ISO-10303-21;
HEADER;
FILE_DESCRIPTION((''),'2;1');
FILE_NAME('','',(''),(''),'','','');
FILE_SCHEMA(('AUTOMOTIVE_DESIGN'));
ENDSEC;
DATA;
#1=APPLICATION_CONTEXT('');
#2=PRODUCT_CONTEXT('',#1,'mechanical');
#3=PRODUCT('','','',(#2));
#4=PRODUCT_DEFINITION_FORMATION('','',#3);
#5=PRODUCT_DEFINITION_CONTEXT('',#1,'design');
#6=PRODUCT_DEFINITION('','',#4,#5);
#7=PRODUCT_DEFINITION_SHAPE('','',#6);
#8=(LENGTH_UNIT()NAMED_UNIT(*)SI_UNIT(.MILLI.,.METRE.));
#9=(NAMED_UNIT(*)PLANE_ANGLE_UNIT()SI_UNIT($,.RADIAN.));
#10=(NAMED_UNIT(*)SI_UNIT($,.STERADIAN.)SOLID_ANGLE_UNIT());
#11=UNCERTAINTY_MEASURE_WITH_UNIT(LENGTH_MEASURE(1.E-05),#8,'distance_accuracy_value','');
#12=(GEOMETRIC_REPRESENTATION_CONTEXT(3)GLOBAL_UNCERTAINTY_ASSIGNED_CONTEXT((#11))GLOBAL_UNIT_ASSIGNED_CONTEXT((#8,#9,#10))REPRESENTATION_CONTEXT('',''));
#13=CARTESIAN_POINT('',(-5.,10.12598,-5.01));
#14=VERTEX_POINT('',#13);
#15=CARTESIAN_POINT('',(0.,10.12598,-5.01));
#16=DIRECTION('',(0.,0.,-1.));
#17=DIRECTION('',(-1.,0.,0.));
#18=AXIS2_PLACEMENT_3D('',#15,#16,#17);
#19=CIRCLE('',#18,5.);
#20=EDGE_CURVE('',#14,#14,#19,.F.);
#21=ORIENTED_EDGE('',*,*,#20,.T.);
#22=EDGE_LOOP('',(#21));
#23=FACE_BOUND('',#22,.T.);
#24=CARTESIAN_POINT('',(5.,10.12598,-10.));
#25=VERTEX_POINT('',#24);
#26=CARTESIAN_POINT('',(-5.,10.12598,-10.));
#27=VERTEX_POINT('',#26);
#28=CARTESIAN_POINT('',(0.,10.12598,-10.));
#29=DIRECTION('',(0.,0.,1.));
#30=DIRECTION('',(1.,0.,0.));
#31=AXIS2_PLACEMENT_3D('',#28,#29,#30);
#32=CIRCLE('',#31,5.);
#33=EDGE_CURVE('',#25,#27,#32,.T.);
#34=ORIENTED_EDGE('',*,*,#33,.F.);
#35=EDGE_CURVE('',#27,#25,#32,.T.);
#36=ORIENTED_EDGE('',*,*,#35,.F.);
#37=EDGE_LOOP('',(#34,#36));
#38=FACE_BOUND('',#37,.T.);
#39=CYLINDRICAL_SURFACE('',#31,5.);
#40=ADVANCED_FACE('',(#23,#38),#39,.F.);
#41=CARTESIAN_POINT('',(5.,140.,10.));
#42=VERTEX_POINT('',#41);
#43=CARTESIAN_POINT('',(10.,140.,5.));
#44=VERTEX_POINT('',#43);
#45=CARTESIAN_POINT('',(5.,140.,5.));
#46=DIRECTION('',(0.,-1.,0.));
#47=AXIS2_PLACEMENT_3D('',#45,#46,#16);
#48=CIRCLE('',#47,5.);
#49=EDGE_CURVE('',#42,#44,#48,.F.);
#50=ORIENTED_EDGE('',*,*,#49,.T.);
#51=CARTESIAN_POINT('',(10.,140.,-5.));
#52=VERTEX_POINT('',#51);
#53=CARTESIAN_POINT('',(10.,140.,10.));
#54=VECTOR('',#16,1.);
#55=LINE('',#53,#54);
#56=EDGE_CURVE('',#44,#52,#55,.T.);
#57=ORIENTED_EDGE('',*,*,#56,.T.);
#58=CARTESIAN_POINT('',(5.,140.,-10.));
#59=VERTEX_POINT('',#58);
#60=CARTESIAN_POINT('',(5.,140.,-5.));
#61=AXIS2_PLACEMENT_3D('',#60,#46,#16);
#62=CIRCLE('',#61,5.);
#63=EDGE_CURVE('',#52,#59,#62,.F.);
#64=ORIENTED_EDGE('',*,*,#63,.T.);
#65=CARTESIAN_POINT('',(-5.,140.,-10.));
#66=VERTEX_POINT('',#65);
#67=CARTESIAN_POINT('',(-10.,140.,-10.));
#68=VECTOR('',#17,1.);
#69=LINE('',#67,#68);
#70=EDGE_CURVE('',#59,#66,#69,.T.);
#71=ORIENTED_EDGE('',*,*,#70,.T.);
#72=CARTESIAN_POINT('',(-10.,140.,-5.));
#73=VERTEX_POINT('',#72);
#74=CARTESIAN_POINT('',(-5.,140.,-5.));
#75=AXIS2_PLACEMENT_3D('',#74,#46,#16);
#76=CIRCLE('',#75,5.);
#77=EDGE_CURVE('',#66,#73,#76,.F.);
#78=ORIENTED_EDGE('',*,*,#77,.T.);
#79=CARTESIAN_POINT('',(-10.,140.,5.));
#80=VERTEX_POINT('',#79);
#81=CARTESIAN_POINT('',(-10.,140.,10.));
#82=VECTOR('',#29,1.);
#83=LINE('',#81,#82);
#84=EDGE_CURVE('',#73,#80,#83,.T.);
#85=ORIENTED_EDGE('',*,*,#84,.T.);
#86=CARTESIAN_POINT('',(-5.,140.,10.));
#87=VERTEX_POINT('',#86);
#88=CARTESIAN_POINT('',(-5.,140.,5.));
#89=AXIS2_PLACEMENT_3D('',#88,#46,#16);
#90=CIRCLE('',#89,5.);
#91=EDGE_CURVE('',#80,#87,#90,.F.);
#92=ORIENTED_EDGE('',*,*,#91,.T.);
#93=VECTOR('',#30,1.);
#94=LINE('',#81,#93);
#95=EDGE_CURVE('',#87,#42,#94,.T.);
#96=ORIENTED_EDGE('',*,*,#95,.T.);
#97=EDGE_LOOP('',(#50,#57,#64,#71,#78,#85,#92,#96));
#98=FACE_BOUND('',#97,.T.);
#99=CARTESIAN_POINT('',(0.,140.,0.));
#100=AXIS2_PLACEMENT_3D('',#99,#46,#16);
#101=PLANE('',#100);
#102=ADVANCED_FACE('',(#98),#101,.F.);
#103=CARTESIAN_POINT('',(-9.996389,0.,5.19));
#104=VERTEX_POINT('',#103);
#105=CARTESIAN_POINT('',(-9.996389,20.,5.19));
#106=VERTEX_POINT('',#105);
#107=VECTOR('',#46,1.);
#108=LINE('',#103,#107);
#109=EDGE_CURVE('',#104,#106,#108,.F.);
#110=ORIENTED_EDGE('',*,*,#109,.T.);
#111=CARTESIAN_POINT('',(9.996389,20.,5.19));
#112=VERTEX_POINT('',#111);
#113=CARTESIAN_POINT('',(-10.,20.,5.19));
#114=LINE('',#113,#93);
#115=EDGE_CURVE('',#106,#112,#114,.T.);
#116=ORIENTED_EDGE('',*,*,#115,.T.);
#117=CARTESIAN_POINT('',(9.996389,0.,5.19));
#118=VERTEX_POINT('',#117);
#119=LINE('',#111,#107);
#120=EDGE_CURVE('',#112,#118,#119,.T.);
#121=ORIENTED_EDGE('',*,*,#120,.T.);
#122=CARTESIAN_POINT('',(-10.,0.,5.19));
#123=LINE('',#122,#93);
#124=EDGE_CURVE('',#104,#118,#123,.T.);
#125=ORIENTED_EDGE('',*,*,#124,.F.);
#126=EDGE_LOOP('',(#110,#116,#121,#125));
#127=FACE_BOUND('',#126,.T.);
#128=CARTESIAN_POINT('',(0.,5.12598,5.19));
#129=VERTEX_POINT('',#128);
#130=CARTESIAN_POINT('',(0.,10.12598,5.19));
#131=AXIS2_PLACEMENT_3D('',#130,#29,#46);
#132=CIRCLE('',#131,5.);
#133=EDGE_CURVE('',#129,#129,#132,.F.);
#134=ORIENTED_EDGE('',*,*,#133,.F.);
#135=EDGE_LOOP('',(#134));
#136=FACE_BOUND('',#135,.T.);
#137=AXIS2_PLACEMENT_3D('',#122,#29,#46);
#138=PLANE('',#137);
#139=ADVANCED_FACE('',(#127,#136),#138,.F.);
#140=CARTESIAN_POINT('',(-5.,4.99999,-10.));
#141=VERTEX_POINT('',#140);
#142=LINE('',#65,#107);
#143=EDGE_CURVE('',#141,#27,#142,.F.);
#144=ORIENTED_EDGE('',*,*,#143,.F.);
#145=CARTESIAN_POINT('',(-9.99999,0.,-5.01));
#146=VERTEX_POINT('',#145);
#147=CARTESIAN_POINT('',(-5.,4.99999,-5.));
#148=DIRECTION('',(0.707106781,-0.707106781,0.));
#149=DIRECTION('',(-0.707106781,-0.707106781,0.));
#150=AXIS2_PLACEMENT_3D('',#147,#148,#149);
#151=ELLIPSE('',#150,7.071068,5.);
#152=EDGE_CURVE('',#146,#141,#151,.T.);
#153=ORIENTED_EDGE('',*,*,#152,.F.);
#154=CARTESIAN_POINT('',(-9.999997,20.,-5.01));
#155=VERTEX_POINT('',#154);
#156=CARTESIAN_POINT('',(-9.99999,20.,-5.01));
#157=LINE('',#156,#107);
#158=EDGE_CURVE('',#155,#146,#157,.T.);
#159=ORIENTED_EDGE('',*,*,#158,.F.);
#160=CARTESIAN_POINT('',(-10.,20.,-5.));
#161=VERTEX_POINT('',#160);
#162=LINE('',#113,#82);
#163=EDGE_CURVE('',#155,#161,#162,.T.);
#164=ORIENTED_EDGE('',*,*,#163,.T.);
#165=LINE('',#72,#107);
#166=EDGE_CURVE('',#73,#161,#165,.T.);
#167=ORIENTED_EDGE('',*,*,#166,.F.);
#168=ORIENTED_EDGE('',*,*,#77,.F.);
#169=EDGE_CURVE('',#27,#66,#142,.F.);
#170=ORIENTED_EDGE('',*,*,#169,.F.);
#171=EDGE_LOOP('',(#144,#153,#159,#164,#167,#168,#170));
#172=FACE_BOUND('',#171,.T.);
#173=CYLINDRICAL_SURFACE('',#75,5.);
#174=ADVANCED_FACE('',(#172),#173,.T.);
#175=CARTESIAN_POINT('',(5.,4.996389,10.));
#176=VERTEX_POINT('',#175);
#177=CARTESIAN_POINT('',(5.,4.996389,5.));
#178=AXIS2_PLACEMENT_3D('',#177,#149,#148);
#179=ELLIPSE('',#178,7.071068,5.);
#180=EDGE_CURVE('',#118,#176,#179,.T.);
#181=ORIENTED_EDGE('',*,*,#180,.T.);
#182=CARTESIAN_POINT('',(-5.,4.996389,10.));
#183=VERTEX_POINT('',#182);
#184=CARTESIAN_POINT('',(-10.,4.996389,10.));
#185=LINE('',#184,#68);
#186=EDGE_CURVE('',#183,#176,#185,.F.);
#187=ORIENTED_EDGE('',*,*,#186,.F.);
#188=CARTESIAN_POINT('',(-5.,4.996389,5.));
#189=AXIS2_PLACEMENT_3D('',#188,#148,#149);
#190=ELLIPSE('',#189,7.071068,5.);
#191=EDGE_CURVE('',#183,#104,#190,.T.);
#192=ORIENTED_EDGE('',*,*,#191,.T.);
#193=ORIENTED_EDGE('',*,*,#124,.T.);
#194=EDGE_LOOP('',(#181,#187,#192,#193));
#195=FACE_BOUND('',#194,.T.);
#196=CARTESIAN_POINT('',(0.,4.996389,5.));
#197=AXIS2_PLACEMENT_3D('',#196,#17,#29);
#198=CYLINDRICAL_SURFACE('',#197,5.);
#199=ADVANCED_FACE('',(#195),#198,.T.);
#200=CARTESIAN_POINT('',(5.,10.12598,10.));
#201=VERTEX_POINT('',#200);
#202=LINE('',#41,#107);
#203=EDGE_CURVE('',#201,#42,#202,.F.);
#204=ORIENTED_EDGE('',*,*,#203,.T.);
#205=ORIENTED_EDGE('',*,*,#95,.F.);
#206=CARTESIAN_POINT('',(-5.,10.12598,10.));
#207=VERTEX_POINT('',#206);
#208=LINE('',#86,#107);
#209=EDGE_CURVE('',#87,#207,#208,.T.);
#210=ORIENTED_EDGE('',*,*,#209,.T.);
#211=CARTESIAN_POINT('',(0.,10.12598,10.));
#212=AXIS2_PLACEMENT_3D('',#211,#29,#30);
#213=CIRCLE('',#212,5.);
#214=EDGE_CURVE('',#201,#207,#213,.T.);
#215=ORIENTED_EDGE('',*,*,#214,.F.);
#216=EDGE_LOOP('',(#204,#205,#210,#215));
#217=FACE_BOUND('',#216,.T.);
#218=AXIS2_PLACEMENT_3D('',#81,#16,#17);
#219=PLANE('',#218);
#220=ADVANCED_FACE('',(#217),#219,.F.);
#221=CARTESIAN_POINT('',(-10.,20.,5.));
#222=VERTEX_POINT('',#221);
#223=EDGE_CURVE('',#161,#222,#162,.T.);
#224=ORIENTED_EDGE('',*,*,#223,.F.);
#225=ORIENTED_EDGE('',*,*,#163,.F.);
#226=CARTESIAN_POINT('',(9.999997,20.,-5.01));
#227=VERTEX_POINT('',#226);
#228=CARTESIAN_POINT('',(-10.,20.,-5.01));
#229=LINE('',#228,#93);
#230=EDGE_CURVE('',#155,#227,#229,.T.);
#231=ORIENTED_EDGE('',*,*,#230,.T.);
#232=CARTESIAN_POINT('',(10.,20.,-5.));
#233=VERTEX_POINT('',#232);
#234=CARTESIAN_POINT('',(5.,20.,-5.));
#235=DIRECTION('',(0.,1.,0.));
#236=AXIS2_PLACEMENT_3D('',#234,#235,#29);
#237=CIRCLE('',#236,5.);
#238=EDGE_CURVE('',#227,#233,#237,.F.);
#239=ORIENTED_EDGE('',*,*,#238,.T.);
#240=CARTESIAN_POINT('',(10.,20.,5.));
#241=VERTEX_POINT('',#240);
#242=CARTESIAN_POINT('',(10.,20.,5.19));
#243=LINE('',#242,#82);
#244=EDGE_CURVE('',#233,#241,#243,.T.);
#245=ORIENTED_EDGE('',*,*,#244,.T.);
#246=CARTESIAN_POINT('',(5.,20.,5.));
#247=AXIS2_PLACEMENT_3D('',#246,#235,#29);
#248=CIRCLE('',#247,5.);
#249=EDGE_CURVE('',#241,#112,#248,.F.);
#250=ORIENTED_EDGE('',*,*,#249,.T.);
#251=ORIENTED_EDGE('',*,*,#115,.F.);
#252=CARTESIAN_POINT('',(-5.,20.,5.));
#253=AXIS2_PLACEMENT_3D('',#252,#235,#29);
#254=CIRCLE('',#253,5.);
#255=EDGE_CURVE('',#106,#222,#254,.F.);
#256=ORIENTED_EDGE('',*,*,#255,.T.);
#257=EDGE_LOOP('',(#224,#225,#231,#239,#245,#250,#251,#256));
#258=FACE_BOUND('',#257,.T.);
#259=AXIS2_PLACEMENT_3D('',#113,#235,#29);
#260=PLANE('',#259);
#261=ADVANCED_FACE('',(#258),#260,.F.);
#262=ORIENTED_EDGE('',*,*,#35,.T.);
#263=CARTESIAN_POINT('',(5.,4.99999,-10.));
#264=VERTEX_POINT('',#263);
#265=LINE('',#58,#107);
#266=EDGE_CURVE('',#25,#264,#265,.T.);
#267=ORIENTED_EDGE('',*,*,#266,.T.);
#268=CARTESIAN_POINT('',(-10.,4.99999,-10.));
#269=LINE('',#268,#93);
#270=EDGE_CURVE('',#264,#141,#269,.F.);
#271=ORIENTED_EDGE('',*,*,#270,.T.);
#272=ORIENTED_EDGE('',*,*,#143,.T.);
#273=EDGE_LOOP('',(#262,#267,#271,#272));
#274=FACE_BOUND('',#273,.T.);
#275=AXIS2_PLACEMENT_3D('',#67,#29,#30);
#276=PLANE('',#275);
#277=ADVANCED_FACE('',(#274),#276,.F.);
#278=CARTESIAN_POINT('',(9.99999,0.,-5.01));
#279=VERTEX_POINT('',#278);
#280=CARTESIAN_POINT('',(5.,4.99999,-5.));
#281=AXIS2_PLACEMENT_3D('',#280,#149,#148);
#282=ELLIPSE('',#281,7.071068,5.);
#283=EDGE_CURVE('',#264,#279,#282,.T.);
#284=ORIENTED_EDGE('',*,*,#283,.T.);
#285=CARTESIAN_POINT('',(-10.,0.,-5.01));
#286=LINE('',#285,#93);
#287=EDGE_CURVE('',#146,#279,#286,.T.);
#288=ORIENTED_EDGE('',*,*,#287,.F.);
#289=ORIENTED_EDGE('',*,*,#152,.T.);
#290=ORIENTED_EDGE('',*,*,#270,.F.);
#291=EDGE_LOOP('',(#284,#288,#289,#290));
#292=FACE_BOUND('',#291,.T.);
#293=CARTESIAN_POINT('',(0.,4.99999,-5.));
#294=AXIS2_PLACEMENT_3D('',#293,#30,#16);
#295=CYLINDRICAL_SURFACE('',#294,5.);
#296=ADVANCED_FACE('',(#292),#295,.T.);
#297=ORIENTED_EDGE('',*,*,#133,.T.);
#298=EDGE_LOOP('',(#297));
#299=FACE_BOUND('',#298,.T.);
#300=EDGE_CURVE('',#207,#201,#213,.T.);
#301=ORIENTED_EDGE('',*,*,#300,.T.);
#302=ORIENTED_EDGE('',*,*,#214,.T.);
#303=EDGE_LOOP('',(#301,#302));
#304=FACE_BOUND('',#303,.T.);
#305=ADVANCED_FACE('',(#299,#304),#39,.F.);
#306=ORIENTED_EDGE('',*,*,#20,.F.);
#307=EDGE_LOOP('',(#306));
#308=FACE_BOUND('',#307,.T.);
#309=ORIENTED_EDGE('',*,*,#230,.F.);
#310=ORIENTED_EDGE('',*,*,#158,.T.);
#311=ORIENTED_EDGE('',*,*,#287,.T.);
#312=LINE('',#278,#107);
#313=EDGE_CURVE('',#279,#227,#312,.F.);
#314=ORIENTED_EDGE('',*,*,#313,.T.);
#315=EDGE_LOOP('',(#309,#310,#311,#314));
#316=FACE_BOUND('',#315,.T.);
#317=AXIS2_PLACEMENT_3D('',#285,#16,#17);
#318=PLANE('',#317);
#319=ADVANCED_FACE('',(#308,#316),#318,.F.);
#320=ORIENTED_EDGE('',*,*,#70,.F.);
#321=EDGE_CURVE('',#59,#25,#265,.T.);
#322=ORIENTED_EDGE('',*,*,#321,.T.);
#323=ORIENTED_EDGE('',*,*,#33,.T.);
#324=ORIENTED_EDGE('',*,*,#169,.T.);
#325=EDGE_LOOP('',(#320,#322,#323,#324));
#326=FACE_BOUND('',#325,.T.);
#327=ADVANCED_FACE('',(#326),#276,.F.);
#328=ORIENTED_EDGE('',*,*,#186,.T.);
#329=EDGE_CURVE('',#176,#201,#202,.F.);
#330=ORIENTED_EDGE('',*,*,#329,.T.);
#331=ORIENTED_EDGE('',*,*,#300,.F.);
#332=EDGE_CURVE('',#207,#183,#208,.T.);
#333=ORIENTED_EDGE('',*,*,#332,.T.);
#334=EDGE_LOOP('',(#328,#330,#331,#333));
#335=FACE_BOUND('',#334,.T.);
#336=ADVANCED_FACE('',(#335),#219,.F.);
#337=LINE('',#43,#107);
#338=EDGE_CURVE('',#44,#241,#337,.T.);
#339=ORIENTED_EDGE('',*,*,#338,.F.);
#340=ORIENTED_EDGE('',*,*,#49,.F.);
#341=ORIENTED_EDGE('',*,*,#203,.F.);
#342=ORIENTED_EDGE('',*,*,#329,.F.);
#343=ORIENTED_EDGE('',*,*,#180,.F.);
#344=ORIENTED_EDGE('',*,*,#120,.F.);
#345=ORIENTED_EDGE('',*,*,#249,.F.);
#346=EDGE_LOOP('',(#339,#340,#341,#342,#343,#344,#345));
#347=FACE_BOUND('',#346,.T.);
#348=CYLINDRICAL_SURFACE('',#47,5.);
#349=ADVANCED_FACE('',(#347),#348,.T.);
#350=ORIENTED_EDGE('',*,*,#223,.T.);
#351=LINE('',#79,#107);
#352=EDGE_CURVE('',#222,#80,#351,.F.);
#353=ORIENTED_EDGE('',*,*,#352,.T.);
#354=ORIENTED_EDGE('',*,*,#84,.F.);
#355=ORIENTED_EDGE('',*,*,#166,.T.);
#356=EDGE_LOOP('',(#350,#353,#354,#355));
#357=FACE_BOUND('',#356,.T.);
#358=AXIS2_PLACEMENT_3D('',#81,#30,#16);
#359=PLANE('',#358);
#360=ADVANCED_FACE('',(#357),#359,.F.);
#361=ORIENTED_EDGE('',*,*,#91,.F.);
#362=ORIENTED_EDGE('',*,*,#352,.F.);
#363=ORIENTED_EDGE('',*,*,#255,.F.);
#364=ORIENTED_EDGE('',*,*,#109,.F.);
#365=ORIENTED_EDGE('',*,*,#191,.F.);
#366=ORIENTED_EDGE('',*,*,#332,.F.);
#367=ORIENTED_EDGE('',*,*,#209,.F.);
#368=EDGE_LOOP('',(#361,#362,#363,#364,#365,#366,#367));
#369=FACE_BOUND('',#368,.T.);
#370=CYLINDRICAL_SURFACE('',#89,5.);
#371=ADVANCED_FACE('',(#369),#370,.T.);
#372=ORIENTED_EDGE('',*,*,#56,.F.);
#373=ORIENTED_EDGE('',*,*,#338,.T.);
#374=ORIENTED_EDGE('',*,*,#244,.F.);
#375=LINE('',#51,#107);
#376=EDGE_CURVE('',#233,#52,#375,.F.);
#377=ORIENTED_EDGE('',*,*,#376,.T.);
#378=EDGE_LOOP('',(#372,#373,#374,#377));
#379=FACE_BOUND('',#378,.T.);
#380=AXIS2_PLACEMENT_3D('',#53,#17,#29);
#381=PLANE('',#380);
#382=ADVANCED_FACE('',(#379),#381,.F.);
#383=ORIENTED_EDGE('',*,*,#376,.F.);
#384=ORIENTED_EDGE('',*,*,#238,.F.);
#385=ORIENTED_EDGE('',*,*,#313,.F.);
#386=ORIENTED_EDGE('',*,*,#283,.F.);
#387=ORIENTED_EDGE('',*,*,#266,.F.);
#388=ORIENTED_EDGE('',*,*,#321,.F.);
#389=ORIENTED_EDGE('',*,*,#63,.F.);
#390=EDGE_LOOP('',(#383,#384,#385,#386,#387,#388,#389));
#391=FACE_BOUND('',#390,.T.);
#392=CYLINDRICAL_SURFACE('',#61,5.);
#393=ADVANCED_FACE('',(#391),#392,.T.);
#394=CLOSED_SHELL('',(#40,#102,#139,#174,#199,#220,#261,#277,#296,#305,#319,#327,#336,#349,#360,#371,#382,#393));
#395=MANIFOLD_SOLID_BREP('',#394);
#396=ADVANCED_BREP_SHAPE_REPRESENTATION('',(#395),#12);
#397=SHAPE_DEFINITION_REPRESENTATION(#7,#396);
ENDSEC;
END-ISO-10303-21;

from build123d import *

# Parameters (mm, degrees)
SKETCH1_W           = 20
SKETCH1_H           = 20
BOSS_EXTRUDE1_DEPTH = 140
SKETCH2_R           = 5
CUT_EXTRUDE1_DEPTH  = 142.774468788
SKETCH3_W           = 10.2
SKETCH3_H           = 20
CUT_EXTRUDE2_DEPTH  = 142.774468788
FILLET1_R           = 5


with BuildPart() as part:
    # Sketch1 → Boss-Extrude1 (new body)
    with BuildSketch(Plane(origin=(0, 0, 0), x_dir=(1, 0, 0), z_dir=(0, 1, 0))):
        Rectangle(SKETCH1_W, SKETCH1_H)
    extrude(amount=BOSS_EXTRUDE1_DEPTH)

    # Sketch2 → Cut-Extrude1 (cut, through all)
    with BuildSketch(Plane.XY.offset(10)):
        with Locations((0, 10.125979961)):
            Circle(SKETCH2_R)
    extrude(amount=-CUT_EXTRUDE1_DEPTH, mode=Mode.SUBTRACT)

    # Sketch3 → Cut-Extrude2 (cut, through all)
    with BuildSketch(Plane(origin=(10, 0, 0), x_dir=(0, 0, -1), z_dir=(1, 0, 0))):
        with Locations((-0.09, 10)):
            Rectangle(SKETCH3_W, SKETCH3_H)
    extrude(amount=-CUT_EXTRUDE2_DEPTH, mode=Mode.SUBTRACT)

    # Fillet1
    # the kernel refuses this fillet: 5 mm, written as the material it takes off along each edge
    with BuildSketch(Plane(origin=(22.5, 0, -10), x_dir=(0, 0, 1), z_dir=(-1, 0, 0))) as fillet1_piece_1:
        with BuildLine():
            CenterArc((FILLET1_R, FILLET1_R), FILLET1_R, 180, 90)
            Line((0, FILLET1_R), (0, 0))
            Line((0, 0), (FILLET1_R, 0))
        make_face()
    extrude(amount=45, mode=Mode.SUBTRACT)
    with BuildSketch(Plane(origin=(-22.49097174, 0, 10), x_dir=(0, 1, 0), z_dir=(1, 0, 0))) as fillet1_piece_2:
        with BuildLine():
            CenterArc((4.996388696, -5), FILLET1_R, 90, 87.822236049)
            Line((0, -4.81), (0, 0))
            Line((0, 0), (4.996388696, 0))
        make_face()
    extrude(amount=44.981943479, mode=Mode.SUBTRACT)
    with BuildSketch(Plane(origin=(-10, -12.5, -10), x_dir=(0, 0, 1), z_dir=(0, 1, 0)), Plane(origin=(-10, -12.5, 10), x_dir=(1, 0, 0), z_dir=(0, 1, 0))) as fillet1_piece_3:
        with BuildLine():
            CenterArc((FILLET1_R, FILLET1_R), FILLET1_R, 180, 90)
            Line((0, FILLET1_R), (0, 0))
            Line((0, 0), (FILLET1_R, 0))
        make_face()
    extrude(amount=165, mode=Mode.SUBTRACT)
    with BuildSketch(Plane(origin=(10, -12.5, -10), x_dir=(0, 0, 1), z_dir=(0, 1, 0)), Plane(origin=(10, -12.5, 10), x_dir=(-1, 0, 0), z_dir=(0, 1, 0))) as fillet1_piece_4:
        with BuildLine():
            CenterArc((FILLET1_R, -FILLET1_R), FILLET1_R, 90, 90)
            Line((0, -FILLET1_R), (0, 0))
            Line((0, 0), (FILLET1_R, 0))
        make_face()
    extrude(amount=165, mode=Mode.SUBTRACT)


solid = part.part
